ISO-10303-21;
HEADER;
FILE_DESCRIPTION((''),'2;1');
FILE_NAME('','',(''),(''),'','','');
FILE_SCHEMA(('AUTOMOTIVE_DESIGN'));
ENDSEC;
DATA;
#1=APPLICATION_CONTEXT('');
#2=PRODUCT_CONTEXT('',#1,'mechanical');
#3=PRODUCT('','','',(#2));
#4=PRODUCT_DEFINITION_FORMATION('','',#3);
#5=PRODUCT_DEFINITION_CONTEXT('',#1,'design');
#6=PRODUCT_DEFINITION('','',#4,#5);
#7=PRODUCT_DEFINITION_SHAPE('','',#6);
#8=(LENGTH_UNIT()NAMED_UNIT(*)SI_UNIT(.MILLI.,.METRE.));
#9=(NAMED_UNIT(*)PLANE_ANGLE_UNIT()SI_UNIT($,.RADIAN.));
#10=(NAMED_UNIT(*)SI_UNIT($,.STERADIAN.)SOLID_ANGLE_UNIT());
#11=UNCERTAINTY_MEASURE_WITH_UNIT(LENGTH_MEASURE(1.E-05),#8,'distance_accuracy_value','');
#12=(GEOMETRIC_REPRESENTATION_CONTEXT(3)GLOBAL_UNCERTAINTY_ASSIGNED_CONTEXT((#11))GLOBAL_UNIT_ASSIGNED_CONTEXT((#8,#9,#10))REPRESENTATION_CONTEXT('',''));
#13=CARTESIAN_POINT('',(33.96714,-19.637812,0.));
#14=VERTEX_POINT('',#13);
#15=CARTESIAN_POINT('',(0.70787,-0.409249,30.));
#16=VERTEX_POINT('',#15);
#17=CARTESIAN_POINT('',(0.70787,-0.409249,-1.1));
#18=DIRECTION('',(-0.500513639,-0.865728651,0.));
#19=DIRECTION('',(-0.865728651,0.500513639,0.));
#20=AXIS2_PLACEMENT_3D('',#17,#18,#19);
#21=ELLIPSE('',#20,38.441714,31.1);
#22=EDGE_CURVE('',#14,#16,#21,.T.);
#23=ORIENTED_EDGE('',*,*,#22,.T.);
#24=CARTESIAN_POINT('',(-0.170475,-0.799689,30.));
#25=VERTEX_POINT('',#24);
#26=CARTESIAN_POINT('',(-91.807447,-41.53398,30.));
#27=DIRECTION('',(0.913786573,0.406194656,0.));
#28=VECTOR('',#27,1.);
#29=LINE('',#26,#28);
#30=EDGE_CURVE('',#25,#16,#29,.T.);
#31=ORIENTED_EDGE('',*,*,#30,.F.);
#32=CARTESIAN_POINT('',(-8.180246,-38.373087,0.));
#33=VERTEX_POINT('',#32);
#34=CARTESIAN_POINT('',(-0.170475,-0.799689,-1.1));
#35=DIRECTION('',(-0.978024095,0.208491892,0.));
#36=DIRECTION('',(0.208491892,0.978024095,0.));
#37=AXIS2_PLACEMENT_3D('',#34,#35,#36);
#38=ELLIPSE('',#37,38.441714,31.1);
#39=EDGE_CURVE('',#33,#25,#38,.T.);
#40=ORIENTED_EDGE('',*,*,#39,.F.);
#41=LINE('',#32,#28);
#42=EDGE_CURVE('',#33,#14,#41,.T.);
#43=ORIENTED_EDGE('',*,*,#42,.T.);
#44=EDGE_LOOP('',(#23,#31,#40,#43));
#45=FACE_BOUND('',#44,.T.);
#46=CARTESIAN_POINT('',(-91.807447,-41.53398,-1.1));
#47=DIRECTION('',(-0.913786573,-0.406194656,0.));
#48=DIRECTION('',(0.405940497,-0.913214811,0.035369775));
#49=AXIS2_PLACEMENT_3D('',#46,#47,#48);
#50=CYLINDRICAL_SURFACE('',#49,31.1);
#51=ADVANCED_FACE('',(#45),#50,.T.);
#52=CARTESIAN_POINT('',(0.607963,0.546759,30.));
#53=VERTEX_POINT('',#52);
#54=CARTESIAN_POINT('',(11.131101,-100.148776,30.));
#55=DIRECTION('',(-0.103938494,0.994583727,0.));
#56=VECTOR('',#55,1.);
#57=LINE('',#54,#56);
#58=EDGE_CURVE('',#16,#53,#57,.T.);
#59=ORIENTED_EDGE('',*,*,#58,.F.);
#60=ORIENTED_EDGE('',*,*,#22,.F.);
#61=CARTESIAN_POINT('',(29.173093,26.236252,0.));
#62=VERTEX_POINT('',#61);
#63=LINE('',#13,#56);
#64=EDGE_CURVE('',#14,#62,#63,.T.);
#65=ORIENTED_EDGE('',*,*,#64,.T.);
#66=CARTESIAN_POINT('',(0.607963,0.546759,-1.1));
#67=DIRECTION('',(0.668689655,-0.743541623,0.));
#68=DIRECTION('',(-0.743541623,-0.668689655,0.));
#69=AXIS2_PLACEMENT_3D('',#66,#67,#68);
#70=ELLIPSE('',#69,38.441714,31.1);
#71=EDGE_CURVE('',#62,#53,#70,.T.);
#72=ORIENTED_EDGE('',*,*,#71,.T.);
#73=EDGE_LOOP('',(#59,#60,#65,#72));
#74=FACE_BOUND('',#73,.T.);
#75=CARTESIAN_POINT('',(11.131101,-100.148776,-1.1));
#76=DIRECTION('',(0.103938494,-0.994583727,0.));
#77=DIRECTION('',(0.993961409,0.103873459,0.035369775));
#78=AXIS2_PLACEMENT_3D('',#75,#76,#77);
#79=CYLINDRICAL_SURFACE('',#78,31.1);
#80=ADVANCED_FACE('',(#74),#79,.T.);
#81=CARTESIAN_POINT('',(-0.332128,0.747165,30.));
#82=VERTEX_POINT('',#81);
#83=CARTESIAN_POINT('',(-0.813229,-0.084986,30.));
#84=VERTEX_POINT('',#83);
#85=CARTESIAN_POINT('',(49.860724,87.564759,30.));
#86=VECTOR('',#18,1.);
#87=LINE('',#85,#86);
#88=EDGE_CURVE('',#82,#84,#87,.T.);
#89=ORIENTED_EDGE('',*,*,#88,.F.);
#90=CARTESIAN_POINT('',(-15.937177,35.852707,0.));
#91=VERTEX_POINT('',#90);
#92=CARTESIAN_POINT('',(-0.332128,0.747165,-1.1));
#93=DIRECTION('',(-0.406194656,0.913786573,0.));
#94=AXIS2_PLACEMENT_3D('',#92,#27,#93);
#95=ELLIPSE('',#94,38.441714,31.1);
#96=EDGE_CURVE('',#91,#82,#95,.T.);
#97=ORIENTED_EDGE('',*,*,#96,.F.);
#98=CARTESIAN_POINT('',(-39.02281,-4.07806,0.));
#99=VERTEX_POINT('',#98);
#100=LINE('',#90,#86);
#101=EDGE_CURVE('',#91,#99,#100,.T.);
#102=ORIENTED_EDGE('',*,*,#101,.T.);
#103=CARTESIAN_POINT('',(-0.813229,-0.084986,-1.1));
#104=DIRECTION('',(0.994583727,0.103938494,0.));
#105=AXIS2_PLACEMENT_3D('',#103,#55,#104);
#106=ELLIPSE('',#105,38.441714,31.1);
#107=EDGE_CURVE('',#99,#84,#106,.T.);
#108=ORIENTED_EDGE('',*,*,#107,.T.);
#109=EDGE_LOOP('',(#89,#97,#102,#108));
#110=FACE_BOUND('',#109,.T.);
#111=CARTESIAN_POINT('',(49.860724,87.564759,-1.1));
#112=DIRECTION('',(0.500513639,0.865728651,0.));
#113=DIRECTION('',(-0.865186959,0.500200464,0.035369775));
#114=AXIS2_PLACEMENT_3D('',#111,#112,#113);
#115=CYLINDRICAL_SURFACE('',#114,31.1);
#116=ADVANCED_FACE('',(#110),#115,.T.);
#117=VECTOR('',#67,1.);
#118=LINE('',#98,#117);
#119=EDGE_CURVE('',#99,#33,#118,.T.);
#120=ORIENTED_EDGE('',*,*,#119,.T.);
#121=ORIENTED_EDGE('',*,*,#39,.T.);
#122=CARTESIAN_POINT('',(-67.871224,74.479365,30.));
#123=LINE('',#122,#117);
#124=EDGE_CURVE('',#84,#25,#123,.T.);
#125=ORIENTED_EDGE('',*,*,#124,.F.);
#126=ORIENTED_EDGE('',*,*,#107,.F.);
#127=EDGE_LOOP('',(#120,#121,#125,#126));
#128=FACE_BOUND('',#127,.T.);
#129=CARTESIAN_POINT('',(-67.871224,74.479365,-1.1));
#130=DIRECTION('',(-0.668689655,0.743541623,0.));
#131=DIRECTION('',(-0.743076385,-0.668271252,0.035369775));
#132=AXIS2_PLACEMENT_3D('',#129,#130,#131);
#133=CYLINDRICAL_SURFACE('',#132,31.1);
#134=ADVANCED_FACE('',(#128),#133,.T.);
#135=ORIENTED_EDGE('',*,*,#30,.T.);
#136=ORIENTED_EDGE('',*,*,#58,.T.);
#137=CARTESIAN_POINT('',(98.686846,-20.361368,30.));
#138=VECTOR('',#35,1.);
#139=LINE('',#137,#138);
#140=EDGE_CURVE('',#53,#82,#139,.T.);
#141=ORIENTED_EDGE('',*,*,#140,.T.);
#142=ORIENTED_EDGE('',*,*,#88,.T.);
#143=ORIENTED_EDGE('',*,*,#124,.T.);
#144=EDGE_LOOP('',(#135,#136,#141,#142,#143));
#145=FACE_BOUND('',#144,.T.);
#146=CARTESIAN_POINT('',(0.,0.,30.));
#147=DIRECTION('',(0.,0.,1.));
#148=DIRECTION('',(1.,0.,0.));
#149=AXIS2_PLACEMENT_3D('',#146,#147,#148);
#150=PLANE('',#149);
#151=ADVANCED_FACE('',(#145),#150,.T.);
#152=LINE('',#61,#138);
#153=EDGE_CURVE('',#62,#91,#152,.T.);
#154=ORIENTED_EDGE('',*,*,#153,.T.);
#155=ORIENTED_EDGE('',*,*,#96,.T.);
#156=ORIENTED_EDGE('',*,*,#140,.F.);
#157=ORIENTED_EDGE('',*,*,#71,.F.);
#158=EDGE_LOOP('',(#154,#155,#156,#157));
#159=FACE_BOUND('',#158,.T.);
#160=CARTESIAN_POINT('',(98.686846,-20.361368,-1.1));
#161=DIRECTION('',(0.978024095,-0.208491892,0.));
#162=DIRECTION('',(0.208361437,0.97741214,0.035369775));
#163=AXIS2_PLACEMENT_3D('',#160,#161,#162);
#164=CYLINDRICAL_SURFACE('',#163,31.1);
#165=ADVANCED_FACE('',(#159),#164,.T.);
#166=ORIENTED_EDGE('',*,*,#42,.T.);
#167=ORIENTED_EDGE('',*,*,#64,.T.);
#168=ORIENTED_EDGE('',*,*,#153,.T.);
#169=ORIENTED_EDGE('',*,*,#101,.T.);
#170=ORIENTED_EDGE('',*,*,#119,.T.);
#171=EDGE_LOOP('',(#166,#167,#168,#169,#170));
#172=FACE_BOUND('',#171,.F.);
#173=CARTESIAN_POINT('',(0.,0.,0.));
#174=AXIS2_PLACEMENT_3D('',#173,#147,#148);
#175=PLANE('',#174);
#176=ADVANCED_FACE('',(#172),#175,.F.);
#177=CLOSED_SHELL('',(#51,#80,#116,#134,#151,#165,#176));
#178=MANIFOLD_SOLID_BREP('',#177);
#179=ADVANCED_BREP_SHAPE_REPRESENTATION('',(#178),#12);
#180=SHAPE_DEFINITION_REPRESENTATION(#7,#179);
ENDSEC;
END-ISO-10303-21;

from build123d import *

# Parameters (mm, degrees)
F1_DEPTH    = 30
F2_T1_DEPTH = 201.5265861528
F2_T3_DEPTH = 201.5265861528
F2_T5_DEPTH = 201.5265861528
F2_T7_DEPTH = 201.5265861528
F2_T9_DEPTH = 201.5265861528


# Not quite as in the source:
# - a fillet or chamfer that OpenCascade refuses, or shapes differently, is made with other operations: its cross-section is extruded or revolved along the edge and cut away or added


with BuildPart() as f1:
    # F0 (on Top) → F1 (new body)
    with BuildSketch(Plane.XY):
        Polygon((-15.9371768066, 35.8527074811), (-39.0228095523, -4.0780599472), (-8.1802458333, -38.3730871366), (33.967139591, -19.6378121565), (29.1730926011, 26.2362517592), align=None)
    extrude(amount=F1_DEPTH)

    # F2: fillet of radius 31.1 on 5 edges, made by hand

    # F2_s2 → F2_t1 (cut)
    with BuildSketch(Plane(origin=(50.4334024594, 87.2336698068, 0), x_dir=(0, 0, 1), z_dir=(-0.5005136386, -0.8657286512, 0))):
        with BuildLine():
            ThreePointArc((0, 31.7420396575), (21.2765502256, 22.2601101881), (30, 0.6614991217))
            Line((30, 0.6614991217), (30, 31.7420396575))
            Line((30, 31.7420396575), (0, 31.7420396575))
        make_face()
    extrude(amount=F2_T1_DEPTH, mode=Mode.SUBTRACT)

    # F2_s4 → F2_t3 (cut)
    with BuildSketch(Plane(origin=(-67.379371666, 74.9217025, 0), x_dir=(0, 0, 1), z_dir=(0.6686896548, -0.7435416233, 0))):
        with BuildLine():
            ThreePointArc((0, 31.7420396575), (21.2765502256, 22.2601101881), (30, 0.6614991217))
            Line((30, 0.6614991217), (30, 31.7420396575))
            Line((30, 31.7420396575), (0, 31.7420396575))
        make_face()
    extrude(amount=F2_T3_DEPTH, mode=Mode.SUBTRACT)

    # F2_s6 → F2_t5 (cut)
    with BuildSketch(Plane(origin=(-92.0761442896, -40.9295111669, 0), x_dir=(0, 0, 1), z_dir=(0.9137865732, 0.406194656, 0))):
        with BuildLine():
            ThreePointArc((0, 31.7420396575), (21.2765502256, 22.2601101881), (30, 0.6614991217))
            Line((30, 0.6614991217), (30, 31.7420396575))
            Line((30, 31.7420396575), (0, 31.7420396575))
        make_face()
    extrude(amount=F2_T5_DEPTH, mode=Mode.SUBTRACT)

    # F2_s8 → F2_t7 (cut)
    with BuildSketch(Plane(origin=(10.473184942, -100.217531544, 0), x_dir=(0, 0, 1), z_dir=(-0.1039384941, 0.9945837267, 0))):
        with BuildLine():
            ThreePointArc((0, 31.7420396575), (21.2765502256, 22.2601101881), (30, 0.6614991217))
            Line((30, 0.6614991217), (30, 31.7420396575))
            Line((30, 31.7420396575), (0, 31.7420396575))
        make_face()
    extrude(amount=F2_T7_DEPTH, mode=Mode.SUBTRACT)

    # F2_s10 → F2_t9 (cut)
    with BuildSketch(Plane(origin=(98.5489285542, -21.0083295959, 0), x_dir=(0, 0, 1), z_dir=(-0.9780240953, 0.2084918918, 0))):
        with BuildLine():
            ThreePointArc((0, 31.7420396575), (21.2765502256, 22.2601101881), (30, 0.6614991217))
            Line((30, 0.6614991217), (30, 31.7420396575))
            Line((30, 31.7420396575), (0, 31.7420396575))
        make_face()
    extrude(amount=F2_T9_DEPTH, mode=Mode.SUBTRACT)


solid = f1.part
